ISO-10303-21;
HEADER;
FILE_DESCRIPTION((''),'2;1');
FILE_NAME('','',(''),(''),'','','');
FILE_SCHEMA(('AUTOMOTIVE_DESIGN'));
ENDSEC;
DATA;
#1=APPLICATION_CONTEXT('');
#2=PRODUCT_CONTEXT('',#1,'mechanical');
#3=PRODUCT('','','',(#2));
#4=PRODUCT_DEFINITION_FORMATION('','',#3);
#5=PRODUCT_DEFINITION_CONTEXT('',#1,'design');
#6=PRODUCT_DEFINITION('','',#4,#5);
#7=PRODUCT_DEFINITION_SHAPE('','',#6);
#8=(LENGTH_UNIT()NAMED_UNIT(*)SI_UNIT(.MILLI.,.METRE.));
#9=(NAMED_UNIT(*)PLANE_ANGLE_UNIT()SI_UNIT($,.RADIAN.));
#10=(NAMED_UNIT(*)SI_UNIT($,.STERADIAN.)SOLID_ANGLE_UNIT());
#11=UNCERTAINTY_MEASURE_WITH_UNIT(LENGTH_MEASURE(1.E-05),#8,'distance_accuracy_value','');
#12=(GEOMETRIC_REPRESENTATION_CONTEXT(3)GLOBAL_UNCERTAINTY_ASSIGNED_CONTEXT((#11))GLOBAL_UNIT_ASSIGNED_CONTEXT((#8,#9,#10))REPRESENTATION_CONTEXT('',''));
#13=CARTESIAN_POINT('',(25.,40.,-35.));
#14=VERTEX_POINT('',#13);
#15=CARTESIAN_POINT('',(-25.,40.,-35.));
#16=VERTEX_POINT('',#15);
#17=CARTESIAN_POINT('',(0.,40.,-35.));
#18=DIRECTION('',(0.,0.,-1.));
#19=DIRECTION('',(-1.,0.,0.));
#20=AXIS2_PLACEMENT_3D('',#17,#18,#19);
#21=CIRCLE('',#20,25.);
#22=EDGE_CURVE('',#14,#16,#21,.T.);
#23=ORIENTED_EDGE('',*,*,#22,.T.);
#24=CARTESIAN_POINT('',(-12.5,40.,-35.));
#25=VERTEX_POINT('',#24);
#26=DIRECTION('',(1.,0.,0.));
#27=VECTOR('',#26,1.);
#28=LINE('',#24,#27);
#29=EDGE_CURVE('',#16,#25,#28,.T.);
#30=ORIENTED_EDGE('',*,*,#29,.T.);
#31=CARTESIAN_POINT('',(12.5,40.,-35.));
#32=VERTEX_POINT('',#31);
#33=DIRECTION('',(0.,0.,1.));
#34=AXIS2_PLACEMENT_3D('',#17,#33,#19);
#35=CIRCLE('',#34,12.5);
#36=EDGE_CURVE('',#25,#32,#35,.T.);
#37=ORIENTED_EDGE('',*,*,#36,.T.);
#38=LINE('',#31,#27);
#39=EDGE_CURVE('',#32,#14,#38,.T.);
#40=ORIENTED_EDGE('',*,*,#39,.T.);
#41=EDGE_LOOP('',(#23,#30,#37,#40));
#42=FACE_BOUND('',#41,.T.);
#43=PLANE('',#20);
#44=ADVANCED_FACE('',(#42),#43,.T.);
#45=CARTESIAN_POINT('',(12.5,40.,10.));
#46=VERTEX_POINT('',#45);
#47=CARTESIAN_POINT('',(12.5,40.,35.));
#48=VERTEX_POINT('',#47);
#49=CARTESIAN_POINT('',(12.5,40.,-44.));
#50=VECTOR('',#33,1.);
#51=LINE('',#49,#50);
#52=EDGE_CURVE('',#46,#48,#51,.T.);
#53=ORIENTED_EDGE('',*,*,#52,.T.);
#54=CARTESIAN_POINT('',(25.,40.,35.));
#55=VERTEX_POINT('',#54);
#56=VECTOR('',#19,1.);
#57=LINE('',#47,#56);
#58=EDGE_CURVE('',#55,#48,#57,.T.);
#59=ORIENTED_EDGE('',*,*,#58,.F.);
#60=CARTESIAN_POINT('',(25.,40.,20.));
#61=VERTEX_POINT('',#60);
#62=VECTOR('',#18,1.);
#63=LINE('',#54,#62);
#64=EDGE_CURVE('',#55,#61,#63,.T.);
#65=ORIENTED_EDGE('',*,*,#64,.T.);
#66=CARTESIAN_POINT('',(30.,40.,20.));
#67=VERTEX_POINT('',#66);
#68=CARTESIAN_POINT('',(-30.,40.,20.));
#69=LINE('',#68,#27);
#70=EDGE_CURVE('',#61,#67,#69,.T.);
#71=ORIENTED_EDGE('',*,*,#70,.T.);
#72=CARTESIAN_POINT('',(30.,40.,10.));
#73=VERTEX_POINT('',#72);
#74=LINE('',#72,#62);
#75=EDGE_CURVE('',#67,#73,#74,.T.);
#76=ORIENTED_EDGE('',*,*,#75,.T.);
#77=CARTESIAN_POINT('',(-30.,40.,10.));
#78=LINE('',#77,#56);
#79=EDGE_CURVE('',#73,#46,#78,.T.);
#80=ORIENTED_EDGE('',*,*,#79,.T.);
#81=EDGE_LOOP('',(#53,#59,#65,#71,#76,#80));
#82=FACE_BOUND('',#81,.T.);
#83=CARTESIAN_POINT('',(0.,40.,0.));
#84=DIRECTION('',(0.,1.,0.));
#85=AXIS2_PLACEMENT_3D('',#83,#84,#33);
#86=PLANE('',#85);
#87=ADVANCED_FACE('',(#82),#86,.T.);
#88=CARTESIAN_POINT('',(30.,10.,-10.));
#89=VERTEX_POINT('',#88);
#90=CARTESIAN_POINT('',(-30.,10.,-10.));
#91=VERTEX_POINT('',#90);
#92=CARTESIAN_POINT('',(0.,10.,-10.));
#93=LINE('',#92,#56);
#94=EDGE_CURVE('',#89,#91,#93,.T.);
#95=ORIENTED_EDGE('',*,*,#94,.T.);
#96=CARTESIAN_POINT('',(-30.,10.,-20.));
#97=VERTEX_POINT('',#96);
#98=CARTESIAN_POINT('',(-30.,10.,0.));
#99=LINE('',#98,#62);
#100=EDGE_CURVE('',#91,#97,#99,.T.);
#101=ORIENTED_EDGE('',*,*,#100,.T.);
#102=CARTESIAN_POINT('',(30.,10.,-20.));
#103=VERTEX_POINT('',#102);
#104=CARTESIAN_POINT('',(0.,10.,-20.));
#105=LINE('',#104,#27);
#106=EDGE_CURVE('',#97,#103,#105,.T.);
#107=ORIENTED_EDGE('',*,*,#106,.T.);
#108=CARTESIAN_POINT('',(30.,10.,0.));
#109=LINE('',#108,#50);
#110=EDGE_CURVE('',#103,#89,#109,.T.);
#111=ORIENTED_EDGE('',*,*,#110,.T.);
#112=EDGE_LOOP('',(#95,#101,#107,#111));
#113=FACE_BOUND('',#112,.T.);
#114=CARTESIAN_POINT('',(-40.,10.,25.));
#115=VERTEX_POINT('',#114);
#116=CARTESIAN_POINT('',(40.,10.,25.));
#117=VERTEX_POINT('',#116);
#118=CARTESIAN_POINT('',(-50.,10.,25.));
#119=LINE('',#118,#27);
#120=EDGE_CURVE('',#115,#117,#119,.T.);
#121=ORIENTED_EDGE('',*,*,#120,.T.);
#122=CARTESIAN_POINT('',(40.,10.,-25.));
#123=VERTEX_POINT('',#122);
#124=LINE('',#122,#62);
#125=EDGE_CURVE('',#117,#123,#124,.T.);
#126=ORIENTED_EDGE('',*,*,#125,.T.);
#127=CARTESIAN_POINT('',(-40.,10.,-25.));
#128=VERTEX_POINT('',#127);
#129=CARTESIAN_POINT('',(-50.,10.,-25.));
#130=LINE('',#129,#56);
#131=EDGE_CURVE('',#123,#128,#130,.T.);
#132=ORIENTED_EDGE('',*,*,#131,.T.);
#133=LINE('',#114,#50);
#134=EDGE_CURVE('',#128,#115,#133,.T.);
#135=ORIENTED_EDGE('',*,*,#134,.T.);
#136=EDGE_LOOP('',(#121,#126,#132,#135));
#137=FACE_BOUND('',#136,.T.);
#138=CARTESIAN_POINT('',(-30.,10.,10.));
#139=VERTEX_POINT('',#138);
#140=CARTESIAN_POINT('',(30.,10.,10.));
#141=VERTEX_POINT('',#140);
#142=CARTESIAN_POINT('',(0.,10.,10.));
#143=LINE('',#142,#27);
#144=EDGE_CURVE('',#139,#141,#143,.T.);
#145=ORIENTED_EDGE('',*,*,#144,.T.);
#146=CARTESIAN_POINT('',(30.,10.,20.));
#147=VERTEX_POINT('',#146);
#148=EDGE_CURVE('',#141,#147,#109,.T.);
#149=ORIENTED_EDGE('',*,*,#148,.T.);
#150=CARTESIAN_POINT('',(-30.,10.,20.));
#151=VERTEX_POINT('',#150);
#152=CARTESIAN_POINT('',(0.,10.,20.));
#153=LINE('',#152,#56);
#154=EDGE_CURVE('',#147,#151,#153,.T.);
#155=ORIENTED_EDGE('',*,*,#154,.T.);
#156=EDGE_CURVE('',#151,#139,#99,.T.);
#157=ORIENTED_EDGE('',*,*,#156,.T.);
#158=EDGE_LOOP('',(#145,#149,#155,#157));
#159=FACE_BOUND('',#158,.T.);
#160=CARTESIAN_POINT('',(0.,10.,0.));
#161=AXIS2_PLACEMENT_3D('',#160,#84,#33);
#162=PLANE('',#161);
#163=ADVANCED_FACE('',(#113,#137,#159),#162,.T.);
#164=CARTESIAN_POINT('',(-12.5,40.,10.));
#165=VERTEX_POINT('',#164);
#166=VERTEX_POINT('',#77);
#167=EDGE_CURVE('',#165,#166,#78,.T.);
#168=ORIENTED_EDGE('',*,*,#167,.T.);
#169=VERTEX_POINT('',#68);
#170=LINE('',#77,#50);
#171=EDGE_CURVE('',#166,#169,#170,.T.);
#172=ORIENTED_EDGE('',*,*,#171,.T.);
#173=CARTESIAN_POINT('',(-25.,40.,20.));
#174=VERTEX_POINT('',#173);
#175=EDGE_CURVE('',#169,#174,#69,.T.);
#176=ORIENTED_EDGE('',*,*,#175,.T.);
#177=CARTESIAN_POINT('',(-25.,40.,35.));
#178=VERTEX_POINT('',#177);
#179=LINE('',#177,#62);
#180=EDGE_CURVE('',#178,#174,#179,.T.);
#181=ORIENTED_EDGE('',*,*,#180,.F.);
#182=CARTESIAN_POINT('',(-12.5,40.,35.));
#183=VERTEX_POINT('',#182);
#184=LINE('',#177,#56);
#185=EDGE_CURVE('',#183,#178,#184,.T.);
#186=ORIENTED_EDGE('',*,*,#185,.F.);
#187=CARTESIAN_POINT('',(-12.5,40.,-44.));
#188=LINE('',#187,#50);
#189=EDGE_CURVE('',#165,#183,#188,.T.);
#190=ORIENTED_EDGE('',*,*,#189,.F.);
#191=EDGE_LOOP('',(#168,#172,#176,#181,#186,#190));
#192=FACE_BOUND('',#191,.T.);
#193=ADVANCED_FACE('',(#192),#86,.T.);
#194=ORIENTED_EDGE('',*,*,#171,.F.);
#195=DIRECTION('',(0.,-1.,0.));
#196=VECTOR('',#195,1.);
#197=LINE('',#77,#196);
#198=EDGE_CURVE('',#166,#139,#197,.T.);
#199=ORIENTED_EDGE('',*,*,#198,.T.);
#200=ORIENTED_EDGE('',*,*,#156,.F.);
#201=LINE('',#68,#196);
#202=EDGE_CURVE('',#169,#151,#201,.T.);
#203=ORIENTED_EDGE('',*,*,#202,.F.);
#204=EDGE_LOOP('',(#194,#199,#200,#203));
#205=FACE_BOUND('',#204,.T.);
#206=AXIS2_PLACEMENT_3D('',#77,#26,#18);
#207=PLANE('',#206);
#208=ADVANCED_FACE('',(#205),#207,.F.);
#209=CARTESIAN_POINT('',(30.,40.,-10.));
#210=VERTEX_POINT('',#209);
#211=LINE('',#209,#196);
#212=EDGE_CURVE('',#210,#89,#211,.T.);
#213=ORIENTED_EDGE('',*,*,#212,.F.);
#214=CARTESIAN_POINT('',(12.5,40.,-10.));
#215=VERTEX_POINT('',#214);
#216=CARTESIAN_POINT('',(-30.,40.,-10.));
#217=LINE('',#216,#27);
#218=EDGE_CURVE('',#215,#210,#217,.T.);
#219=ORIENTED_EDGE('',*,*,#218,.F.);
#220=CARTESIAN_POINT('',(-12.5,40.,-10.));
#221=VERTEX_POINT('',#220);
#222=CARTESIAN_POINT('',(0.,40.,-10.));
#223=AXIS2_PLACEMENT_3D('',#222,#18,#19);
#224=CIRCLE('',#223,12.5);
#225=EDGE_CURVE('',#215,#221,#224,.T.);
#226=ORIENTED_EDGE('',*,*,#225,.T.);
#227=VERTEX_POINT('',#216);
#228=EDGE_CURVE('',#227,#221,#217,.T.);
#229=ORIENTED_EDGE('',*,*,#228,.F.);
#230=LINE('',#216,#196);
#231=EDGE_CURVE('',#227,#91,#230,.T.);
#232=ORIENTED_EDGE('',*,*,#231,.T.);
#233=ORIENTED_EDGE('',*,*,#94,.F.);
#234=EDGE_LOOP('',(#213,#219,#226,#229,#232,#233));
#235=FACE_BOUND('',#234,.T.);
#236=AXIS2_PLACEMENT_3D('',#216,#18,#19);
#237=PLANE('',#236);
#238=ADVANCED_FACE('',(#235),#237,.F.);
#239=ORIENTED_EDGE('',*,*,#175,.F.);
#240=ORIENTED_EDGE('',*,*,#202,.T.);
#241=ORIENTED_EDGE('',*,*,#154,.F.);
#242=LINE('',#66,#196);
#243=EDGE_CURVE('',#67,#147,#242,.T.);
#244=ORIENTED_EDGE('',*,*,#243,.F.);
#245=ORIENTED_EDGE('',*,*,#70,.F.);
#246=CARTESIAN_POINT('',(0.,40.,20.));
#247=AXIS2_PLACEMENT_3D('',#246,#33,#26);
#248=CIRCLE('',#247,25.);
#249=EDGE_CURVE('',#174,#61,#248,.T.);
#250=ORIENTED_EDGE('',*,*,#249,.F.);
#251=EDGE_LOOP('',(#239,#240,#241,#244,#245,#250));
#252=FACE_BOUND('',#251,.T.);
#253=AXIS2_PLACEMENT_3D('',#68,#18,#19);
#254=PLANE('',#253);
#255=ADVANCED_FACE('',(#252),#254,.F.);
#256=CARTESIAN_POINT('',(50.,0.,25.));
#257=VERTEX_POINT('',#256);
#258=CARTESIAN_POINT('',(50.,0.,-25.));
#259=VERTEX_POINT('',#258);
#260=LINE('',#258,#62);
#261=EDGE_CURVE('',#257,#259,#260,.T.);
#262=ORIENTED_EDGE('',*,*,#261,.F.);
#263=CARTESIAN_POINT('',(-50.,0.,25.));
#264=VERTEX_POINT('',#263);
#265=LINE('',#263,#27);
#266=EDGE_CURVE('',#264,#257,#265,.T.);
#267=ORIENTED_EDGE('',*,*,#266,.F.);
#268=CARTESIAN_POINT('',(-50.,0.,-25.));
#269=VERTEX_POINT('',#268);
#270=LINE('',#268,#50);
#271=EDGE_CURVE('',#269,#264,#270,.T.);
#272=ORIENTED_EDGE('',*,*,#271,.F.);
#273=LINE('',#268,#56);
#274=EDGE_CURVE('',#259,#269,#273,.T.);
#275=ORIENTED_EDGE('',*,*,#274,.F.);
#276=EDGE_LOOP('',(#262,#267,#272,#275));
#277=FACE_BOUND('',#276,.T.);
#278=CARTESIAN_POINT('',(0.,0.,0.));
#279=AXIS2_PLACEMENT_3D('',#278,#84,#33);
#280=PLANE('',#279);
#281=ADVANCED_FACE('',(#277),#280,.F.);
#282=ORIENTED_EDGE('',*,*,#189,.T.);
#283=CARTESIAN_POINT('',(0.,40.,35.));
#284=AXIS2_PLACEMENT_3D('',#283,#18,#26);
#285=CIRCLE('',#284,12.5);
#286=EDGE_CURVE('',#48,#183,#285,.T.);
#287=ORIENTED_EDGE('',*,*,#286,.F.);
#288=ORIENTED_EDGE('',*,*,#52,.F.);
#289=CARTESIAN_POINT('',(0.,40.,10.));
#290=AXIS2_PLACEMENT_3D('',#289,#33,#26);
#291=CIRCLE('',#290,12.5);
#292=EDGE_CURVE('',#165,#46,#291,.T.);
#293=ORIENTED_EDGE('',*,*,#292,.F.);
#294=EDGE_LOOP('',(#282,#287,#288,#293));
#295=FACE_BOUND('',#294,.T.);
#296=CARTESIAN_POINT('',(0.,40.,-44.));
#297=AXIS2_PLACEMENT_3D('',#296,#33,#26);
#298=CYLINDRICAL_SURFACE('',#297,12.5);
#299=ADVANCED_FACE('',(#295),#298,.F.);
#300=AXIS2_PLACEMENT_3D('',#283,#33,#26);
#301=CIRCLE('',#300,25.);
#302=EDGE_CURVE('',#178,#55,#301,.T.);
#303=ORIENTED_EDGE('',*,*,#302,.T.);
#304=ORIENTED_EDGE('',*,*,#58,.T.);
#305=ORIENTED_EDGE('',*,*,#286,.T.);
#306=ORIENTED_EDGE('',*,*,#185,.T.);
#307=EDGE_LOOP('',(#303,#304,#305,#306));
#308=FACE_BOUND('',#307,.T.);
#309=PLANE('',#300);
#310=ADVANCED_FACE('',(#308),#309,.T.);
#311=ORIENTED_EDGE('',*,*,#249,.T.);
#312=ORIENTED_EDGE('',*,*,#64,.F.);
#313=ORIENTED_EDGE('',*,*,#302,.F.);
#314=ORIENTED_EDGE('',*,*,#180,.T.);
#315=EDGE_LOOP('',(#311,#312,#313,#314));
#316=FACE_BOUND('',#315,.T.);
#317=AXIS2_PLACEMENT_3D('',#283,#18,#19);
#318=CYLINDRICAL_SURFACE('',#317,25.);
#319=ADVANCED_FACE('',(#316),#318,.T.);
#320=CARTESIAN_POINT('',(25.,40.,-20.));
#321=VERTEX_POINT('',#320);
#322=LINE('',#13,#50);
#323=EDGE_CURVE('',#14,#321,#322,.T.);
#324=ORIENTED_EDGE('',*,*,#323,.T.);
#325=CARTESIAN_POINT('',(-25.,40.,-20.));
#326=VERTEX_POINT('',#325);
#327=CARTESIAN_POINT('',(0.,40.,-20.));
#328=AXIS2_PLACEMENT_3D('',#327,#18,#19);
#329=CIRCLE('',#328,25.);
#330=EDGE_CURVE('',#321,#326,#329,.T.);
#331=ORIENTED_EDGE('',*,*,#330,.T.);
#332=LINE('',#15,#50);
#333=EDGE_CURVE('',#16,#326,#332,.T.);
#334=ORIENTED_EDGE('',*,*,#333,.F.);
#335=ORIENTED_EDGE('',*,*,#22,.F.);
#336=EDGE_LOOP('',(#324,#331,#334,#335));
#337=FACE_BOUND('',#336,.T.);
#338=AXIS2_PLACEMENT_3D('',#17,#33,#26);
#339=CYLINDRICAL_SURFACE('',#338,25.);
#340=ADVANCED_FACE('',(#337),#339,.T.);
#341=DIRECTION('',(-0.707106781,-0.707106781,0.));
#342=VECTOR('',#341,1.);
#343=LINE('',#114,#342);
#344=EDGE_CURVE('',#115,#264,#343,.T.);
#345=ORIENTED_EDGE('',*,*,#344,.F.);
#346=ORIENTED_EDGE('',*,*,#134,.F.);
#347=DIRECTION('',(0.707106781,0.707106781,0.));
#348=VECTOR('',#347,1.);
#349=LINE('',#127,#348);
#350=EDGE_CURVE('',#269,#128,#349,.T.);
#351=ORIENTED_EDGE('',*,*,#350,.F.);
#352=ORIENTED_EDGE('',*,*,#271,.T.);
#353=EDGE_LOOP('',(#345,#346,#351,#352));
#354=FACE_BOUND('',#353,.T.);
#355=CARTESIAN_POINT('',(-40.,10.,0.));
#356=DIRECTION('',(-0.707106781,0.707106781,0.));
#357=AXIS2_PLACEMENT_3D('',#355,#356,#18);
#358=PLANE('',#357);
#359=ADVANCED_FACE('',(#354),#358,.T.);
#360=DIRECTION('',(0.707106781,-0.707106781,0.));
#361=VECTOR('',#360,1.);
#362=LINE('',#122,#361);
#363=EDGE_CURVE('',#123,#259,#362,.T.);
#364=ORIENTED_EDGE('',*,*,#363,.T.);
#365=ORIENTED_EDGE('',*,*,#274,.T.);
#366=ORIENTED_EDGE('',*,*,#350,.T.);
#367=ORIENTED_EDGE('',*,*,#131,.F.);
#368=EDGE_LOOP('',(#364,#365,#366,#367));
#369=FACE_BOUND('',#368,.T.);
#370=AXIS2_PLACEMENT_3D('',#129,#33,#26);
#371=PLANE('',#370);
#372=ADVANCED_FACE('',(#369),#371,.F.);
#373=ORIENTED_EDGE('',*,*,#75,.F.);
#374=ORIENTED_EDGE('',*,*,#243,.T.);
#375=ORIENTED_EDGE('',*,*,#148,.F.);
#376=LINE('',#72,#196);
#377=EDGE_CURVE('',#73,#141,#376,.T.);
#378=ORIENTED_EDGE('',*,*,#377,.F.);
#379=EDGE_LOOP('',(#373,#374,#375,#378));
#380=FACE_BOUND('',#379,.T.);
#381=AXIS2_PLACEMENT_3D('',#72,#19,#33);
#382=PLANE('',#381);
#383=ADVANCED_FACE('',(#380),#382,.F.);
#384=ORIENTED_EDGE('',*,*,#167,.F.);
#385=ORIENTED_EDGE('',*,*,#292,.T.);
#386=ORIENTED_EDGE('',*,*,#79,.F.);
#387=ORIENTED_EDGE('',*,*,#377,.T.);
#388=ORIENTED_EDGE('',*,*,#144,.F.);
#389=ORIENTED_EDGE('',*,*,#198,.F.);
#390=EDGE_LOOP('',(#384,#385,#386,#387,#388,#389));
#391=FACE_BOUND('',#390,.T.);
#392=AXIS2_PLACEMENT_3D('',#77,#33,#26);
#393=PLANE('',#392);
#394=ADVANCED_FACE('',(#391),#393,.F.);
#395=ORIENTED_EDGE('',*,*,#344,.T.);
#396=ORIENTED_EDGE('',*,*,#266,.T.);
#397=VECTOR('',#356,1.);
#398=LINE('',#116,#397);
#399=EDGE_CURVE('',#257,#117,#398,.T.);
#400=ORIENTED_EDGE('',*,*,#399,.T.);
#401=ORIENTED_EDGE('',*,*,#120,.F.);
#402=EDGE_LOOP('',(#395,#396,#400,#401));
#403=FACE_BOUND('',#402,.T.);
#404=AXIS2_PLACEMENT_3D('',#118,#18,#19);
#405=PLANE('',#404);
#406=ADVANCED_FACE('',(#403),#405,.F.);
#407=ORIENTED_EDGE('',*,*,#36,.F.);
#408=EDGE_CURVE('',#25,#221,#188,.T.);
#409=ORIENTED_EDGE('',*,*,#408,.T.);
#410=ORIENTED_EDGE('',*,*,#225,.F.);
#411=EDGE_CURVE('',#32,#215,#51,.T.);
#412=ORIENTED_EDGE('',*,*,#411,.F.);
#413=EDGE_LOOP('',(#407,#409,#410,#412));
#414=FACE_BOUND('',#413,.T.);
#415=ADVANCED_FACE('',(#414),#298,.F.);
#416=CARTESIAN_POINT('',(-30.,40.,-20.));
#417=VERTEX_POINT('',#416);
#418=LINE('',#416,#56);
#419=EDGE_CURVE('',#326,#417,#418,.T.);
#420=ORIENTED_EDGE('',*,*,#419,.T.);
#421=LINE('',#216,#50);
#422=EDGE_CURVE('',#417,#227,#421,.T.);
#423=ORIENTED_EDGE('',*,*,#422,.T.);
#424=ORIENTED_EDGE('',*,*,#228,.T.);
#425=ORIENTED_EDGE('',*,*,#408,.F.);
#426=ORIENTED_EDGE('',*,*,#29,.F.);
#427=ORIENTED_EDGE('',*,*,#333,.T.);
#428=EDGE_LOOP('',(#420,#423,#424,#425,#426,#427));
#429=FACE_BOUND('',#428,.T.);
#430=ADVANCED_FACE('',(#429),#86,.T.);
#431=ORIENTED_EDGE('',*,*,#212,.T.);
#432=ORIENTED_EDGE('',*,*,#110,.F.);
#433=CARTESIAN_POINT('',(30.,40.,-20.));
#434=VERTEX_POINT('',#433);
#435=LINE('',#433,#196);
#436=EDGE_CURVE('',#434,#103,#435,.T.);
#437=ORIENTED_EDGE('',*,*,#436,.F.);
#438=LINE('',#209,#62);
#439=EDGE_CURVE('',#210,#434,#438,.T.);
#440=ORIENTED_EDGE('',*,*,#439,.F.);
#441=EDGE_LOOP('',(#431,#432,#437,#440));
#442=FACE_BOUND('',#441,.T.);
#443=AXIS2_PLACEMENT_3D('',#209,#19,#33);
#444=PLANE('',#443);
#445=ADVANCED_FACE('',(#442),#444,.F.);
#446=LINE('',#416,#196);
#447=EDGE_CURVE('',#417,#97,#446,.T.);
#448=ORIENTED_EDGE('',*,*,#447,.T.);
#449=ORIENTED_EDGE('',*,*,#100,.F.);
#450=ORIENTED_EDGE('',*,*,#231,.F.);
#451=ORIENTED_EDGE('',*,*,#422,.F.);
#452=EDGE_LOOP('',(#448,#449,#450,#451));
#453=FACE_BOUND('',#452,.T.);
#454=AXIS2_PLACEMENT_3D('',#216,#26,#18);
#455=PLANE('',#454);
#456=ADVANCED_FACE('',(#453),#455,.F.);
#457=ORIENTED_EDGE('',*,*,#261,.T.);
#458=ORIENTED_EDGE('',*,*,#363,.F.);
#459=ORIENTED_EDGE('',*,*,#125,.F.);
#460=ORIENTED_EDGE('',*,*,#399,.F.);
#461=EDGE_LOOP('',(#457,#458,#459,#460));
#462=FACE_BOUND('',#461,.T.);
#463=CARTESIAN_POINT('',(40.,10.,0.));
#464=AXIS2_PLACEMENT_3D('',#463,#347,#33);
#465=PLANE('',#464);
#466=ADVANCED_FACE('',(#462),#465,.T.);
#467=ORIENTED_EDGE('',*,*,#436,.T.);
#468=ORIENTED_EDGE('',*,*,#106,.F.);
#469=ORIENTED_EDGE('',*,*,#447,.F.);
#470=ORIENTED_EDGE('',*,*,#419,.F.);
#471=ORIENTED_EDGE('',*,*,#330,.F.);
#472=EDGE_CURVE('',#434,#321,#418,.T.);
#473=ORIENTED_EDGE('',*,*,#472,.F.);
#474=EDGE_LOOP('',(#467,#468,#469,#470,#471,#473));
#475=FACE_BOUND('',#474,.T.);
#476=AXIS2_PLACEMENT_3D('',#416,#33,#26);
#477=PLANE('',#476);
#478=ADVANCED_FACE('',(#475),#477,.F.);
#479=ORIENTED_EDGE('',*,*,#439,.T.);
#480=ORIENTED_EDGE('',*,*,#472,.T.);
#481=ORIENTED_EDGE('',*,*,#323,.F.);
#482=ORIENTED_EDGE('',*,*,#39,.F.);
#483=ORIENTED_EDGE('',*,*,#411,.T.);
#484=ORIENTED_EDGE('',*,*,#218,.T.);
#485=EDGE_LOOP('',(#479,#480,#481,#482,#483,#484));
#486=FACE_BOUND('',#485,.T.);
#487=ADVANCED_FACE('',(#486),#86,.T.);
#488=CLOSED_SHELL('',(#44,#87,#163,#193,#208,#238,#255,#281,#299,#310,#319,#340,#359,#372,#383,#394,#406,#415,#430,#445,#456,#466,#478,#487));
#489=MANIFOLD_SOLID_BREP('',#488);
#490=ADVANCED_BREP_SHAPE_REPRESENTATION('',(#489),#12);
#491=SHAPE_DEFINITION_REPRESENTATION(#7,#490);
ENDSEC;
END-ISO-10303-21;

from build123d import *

# Parameters (mm, degrees)
SKETCH1_W           = 100
SKETCH1_H           = 50
BOSS_EXTRUDE1_DEPTH = 10
CHAMFER1_SIZE       = 10
CHAMFER2_SIZE       = 10
SKETCH2_W           = 60
SKETCH2_H           = 10
BOSS_EXTRUDE3_DEPTH = 40
CUT_EXTRUDE1_DEPTH  = 64
BOSS_EXTRUDE5_START = 15
BOSS_EXTRUDE5_DEPTH = 15
BOSS_EXTRUDE6_DEPTH = 15


with BuildPart() as part:
    # Sketch1 → Boss-Extrude1 (new body)
    with BuildSketch(Plane(origin=(0, 0, 0), x_dir=(1, 0, 0), z_dir=(0, 1, 0))):
        Rectangle(SKETCH1_W, SKETCH1_H)
    extrude(amount=BOSS_EXTRUDE1_DEPTH)

    # Chamfer1
    chamfer1_edges = [part.edges().sort_by_distance(p)[0] for p in [
        (-50, 10, 0),
    ]]
    chamfer(chamfer1_edges, length=CHAMFER1_SIZE - 0.0001)  # a hair under: the kernel refuses the full size

    # Chamfer2
    chamfer2_edges = [part.edges().sort_by_distance(p)[0] for p in [
        (50, 10, 0),
    ]]
    chamfer(chamfer2_edges, length=CHAMFER2_SIZE - 0.0001)  # a hair under: the kernel refuses the full size

    # Sketch2 → Boss-Extrude3 (add)
    with BuildSketch(Plane(origin=(0, 0, 0), x_dir=(1, 0, 0), z_dir=(0, 1, 0))):
        with Locations((0, -15)):
            Rectangle(SKETCH2_W, SKETCH2_H)
        with Locations((0, 15)):
            Rectangle(SKETCH2_W, SKETCH2_H)
    extrude(amount=BOSS_EXTRUDE3_DEPTH)

    # Sketch4 → Cut-Extrude1 (cut)
    with BuildSketch(Plane.XY.offset(20)):
        with BuildLine():
            Line((-12.5, 40), (12.5, 40))
            ThreePointArc((12.5, 40), (0, 27.5), (-12.5, 40))
        make_face()
    extrude(amount=-CUT_EXTRUDE1_DEPTH, mode=Mode.SUBTRACT)

    # Sketch10 → Boss-Extrude5 (add)
    with BuildSketch(Plane.XY.offset(20).offset(BOSS_EXTRUDE5_START)):
        with BuildLine():
            Line((-25, 40), (-12.5, 40))
            ThreePointArc((-12.5, 40), (0, 27.5), (12.5, 40))
            Line((12.5, 40), (25, 40))
            ThreePointArc((25, 40), (0, 15), (-25, 40))
        make_face()
    extrude(amount=-BOSS_EXTRUDE5_DEPTH)

    # Sketch11 → Boss-Extrude6 (add)
    with BuildSketch(Plane(origin=(0, 0, -20), x_dir=(-1, 0, 0), z_dir=(0, 0, -1))):
        with BuildLine():
            Line((-12.5, 40), (-25, 40))
            ThreePointArc((-25, 40), (0, 15), (25, 40))
            Line((25, 40), (12.5, 40))
            ThreePointArc((12.5, 40), (0, 27.5), (-12.5, 40))
        make_face()
    extrude(amount=BOSS_EXTRUDE6_DEPTH)


solid = part.part
